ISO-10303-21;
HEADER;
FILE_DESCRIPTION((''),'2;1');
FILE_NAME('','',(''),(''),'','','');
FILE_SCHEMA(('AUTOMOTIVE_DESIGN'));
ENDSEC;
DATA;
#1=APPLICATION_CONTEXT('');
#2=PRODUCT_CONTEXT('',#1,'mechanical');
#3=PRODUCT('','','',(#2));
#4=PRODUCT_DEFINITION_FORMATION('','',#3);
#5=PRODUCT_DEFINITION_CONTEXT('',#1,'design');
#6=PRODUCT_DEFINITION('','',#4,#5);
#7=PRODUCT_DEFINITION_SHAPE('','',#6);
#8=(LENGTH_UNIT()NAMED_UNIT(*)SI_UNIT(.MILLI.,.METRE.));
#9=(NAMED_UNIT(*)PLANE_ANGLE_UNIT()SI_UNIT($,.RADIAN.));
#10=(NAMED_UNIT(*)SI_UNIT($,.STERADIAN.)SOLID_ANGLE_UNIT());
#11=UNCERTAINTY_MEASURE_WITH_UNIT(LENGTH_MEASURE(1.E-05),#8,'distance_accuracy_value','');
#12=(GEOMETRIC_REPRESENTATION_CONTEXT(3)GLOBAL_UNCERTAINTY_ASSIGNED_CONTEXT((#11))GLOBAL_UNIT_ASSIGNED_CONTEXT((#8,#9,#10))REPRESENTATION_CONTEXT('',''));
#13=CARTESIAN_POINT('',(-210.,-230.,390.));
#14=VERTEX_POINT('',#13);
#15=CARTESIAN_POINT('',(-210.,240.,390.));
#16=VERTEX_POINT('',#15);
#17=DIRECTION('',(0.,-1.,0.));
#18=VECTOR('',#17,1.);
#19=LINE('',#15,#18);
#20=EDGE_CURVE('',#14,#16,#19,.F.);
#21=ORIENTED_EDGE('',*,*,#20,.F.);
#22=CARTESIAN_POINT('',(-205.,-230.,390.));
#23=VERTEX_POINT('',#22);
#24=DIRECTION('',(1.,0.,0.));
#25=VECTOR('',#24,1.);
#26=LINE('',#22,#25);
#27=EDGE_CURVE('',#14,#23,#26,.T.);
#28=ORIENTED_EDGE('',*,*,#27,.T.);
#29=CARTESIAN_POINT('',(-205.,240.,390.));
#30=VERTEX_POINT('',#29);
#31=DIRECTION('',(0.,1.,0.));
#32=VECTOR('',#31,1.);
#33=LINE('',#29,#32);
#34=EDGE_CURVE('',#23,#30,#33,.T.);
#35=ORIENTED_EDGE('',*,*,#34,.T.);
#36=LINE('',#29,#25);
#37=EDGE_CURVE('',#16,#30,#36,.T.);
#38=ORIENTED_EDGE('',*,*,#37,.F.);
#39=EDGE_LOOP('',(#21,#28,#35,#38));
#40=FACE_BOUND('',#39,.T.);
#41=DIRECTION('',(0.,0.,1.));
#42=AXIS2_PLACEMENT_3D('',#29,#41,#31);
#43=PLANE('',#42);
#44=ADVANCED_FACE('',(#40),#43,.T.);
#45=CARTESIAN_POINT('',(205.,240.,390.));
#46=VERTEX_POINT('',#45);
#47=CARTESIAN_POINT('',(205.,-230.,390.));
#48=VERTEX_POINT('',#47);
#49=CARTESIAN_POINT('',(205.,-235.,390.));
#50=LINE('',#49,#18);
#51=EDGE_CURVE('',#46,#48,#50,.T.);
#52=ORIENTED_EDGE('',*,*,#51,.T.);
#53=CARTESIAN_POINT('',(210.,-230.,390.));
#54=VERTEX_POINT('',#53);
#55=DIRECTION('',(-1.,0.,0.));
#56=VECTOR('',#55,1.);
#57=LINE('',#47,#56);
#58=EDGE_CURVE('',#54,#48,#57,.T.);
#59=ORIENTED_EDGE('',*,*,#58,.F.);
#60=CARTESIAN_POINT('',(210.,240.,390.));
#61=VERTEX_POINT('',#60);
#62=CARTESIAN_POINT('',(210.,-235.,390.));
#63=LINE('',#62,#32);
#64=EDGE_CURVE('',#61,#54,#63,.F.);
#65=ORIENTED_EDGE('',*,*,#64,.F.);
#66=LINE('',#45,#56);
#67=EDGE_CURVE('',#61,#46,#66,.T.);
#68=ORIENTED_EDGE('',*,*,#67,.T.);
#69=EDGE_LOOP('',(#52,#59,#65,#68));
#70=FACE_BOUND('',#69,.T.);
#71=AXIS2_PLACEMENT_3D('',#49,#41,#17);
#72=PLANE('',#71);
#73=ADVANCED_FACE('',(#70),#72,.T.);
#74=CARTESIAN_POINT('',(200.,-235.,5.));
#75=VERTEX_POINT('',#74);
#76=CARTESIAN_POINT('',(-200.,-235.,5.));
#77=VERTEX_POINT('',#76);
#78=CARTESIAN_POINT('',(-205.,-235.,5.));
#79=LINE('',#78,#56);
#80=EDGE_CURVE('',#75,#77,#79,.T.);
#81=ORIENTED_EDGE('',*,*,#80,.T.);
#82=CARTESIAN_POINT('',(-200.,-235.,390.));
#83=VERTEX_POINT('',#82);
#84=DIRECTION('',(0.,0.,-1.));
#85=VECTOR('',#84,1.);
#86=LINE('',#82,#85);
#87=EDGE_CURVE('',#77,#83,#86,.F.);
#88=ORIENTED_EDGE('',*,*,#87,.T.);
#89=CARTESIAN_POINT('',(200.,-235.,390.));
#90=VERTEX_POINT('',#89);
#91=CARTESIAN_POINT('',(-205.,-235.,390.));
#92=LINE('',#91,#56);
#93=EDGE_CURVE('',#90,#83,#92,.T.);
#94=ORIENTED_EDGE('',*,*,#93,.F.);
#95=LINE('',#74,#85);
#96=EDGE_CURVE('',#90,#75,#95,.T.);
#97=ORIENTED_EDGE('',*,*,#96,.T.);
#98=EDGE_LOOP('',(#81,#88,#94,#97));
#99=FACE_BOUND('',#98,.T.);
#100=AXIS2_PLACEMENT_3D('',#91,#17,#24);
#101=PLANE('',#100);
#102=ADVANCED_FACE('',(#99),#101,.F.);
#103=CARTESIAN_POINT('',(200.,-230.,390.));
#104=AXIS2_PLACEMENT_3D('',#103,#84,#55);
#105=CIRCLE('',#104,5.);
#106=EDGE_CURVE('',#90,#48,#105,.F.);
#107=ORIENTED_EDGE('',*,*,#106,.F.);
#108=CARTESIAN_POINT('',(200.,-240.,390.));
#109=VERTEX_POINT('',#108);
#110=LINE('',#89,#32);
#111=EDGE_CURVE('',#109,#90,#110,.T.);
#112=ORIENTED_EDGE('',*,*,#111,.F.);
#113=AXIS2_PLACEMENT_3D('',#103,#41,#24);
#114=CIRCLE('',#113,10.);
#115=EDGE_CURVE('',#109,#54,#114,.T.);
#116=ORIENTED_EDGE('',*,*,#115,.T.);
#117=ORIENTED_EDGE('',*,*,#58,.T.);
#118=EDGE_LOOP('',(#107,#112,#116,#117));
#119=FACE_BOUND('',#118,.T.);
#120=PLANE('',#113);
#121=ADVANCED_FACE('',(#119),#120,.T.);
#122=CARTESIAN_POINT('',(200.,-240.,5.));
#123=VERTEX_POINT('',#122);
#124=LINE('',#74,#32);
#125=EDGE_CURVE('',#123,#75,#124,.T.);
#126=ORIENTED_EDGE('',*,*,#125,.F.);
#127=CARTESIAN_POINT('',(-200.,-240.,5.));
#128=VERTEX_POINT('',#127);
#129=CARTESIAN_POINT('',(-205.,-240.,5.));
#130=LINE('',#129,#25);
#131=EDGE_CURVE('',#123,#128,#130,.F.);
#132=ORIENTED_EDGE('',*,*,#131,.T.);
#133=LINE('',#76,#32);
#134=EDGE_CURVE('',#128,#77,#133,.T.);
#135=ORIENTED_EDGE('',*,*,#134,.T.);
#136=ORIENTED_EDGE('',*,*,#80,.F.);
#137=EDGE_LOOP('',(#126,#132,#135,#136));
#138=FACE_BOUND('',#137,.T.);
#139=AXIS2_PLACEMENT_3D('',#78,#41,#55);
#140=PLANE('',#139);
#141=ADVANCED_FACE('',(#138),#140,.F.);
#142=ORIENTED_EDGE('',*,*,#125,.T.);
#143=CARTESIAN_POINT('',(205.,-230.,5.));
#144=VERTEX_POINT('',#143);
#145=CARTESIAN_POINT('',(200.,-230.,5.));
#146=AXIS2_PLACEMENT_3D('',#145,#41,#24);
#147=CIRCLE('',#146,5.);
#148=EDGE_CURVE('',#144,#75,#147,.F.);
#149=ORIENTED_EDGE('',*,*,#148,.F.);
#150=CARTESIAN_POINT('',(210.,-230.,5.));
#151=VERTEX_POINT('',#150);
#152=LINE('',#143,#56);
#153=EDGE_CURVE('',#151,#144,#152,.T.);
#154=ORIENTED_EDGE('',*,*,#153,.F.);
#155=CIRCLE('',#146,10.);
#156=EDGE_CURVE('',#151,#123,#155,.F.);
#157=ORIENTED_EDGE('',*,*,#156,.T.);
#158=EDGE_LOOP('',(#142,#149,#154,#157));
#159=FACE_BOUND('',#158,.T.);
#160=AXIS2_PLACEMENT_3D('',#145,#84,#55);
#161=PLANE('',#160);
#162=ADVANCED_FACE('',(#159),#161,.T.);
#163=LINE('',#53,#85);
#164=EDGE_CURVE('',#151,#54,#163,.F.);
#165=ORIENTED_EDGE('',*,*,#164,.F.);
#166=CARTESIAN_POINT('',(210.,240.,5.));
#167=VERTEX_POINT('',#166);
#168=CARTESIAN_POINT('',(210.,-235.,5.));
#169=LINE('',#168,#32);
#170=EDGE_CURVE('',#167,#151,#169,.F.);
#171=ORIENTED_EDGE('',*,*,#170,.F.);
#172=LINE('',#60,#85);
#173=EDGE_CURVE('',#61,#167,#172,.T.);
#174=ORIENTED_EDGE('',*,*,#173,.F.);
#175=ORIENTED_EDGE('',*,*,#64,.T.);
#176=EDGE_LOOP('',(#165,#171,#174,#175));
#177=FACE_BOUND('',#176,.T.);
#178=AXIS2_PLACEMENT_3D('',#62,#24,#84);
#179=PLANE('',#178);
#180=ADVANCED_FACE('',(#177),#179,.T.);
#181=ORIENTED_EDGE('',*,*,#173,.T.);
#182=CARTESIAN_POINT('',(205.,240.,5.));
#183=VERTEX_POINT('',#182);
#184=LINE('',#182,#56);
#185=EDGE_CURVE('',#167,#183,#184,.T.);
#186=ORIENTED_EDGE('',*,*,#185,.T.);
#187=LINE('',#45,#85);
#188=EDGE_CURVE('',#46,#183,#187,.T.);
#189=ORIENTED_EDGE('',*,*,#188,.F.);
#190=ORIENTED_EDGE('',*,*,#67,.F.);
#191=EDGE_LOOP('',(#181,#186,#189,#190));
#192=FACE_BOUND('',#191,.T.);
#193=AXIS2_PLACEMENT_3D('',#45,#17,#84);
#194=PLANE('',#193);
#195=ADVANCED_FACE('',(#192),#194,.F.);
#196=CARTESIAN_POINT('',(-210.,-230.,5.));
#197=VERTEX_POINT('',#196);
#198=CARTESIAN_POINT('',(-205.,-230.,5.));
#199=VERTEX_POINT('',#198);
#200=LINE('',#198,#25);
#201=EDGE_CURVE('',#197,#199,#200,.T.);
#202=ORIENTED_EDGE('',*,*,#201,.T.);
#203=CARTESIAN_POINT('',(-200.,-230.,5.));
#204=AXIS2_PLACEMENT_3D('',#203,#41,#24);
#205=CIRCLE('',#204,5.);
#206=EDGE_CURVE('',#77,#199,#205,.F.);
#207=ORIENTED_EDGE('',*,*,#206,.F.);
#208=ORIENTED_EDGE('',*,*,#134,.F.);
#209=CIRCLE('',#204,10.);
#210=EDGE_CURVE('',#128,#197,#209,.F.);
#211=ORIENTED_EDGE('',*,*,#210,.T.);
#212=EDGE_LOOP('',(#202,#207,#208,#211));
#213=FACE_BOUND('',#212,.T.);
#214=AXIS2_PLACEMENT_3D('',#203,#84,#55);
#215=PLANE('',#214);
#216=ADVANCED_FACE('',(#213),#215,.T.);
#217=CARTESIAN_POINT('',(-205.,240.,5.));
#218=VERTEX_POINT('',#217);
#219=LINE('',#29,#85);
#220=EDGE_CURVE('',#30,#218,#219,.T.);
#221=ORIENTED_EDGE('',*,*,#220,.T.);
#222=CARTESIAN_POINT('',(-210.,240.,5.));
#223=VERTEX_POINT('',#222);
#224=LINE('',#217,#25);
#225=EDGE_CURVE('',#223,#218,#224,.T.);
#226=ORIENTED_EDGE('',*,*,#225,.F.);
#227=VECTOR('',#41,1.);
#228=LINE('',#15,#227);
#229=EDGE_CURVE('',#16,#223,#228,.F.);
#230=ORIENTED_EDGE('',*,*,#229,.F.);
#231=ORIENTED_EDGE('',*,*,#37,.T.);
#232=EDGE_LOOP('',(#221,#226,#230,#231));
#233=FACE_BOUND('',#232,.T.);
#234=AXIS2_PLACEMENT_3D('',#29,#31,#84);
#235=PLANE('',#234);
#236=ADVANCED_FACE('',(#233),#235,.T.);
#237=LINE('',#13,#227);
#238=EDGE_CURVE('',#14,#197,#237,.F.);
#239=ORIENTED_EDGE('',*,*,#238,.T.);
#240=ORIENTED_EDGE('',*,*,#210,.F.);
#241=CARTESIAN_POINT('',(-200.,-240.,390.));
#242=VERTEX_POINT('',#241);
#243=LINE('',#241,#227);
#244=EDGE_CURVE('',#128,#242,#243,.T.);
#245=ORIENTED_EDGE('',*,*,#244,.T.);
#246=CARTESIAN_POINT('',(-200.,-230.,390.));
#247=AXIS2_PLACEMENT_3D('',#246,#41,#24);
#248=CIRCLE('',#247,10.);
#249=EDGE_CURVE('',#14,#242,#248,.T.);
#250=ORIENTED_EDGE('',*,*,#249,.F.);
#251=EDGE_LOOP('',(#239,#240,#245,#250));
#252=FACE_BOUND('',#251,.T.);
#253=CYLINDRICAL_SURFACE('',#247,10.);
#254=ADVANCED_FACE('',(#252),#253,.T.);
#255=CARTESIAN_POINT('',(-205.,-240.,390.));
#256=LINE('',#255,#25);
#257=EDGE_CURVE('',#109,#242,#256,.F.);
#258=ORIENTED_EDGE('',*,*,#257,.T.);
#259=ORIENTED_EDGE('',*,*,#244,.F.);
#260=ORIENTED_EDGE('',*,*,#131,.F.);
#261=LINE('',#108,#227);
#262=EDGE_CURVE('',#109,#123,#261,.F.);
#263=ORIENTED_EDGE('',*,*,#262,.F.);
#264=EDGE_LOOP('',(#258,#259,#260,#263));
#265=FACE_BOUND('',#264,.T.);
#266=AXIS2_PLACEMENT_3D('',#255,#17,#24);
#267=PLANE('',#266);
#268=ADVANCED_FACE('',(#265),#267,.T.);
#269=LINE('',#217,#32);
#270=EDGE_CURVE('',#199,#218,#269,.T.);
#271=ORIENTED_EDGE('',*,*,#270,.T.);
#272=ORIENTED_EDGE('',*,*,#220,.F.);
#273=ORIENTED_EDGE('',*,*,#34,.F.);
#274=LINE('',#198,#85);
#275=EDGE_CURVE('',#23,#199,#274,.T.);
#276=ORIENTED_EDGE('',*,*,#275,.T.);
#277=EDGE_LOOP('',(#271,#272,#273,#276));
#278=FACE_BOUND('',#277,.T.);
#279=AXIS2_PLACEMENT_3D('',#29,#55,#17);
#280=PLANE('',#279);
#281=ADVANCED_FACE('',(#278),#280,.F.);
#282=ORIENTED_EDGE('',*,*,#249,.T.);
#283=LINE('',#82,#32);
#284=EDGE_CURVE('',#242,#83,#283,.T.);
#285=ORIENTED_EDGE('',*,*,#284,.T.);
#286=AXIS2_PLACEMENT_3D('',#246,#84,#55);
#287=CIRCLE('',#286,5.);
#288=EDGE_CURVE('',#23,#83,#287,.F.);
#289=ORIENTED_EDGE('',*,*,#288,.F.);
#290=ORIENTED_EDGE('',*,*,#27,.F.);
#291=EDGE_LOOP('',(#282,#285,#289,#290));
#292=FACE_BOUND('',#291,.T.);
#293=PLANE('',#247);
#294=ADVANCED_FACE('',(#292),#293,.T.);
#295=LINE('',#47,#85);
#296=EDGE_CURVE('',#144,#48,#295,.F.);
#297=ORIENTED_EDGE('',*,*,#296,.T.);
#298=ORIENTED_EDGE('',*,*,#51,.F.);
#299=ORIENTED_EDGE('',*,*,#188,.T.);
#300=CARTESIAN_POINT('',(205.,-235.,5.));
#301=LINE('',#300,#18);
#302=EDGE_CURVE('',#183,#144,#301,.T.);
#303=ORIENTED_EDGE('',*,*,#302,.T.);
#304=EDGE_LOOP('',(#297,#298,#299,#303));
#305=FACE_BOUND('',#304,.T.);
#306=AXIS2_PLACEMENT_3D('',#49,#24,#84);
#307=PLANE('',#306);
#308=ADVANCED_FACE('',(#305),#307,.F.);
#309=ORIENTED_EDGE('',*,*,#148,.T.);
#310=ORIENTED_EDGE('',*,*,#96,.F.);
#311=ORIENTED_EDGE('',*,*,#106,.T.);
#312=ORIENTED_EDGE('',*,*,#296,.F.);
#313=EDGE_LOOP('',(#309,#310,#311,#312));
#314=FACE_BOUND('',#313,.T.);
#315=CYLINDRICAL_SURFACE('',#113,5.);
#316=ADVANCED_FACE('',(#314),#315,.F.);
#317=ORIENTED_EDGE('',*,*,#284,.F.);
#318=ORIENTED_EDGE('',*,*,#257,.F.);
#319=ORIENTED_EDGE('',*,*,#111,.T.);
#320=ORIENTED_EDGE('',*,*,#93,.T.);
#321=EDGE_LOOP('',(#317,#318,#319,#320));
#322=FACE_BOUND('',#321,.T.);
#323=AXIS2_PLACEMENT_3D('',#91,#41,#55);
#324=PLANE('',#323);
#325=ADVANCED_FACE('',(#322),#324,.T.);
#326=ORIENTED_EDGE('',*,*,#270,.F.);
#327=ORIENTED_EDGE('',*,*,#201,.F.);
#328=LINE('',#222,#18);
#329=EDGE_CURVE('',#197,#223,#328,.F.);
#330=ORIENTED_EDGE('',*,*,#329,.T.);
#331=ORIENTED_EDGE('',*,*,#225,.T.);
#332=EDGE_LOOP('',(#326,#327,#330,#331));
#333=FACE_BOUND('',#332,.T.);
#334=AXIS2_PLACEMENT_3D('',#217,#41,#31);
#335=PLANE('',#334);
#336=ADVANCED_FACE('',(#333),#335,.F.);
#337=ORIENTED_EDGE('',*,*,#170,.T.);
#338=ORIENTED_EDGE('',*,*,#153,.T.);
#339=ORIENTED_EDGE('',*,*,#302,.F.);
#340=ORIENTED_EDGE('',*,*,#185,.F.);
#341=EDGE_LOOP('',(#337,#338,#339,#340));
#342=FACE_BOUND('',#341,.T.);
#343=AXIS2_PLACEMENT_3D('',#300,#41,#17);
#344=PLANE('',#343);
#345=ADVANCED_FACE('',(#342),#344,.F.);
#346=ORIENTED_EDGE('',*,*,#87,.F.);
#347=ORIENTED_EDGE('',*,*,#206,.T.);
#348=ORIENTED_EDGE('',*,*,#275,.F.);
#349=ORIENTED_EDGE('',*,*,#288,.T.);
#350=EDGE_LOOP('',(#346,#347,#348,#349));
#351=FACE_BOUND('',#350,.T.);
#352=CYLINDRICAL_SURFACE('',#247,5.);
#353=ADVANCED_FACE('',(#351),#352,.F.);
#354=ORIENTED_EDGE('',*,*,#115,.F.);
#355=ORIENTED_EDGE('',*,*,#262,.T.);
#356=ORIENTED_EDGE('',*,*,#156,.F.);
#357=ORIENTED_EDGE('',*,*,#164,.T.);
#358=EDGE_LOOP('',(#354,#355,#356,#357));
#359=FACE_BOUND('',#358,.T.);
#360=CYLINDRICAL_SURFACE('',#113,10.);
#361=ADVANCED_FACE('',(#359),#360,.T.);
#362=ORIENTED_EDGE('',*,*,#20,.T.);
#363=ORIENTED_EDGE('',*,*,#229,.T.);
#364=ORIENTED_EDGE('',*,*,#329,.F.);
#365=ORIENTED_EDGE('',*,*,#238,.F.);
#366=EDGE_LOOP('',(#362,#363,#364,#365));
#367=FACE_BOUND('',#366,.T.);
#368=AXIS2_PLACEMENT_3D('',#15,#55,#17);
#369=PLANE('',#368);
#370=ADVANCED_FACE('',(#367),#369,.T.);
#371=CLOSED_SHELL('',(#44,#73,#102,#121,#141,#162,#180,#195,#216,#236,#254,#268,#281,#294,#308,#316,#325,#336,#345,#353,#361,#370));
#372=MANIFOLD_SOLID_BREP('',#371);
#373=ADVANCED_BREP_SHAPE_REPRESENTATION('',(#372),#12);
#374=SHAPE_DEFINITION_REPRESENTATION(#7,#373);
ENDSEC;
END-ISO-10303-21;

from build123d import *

# Parameters (mm, degrees)
SKETCH_1_W            = 420
SKETCH_1_H            = 480
EXTRUDE_1_DEPTH       = 5
FILLET_1_R            = 5
EXTRUDE_START         = 385
EXTRUDE_3_DEPTH       = 385
CUT_EXTRUDE_START     = -5
CUT_EXTRUDE_2_DEPTH   = 5
SHEET_START           = 5
SHEET_METAL_1_DEPTH   = 385
SHEET_METAL_1_2_DEPTH = 385


# Read off the part's stored shape, not the designer's step: 转换实体1
with BuildPart() as part:
    # Sketch 1 → 凸台-拉伸1 (new body)
    with BuildSketch(Plane.XY):
        Rectangle(SKETCH_1_W, SKETCH_1_H)
    extrude(amount=EXTRUDE_1_DEPTH)

    # 圆角1
    fillet_1_edges = [part.edges().sort_by_distance(p)[0] for p in [
        (210, -240, 2.5),
        (-210, -240, 2.5),
    ]]
    fillet(fillet_1_edges, radius=FILLET_1_R)

    # 草图4 → 凸台-拉伸3 (add)
    with BuildSketch(Plane.XY.offset(5).offset(EXTRUDE_START)):
        with BuildLine():
            Line((-205, 240), (-205, -235))
            Line((-205, -235), (205, -235))
            Line((205, -235), (205, 240))
            Line((205, 240), (210, 240))
            Line((210, 240), (210, -235))
            ThreePointArc((210, -235), (208.535533906, -238.535533906), (205, -240))
            Line((205, -240), (-205, -240))
            ThreePointArc((-205, -240), (-208.535533906, -238.535533906), (-210, -235))
            Line((-210, -235), (-210, 240))
            Line((-210, 240), (-205, 240))
        make_face()
    extrude(amount=-EXTRUDE_3_DEPTH)

    # 草图5 → 切除-拉伸2 (cut)
    with BuildSketch(Plane(origin=(0, 0, 0), x_dir=(-1, 0, 0), z_dir=(0, 0, -1)).offset(CUT_EXTRUDE_START)):
        with BuildLine():
            Line((-205, -240), (205, -240))
            ThreePointArc((205, -240), (208.535533906, -238.535533906), (210, -235))
            Line((210, -235), (210, 240))
            Line((210, 240), (-210, 240))
            Line((-210, 240), (-210, -235))
            ThreePointArc((-210, -235), (-208.535533906, -238.535533906), (-205, -240))
        make_face()
    extrude(amount=CUT_EXTRUDE_2_DEPTH, mode=Mode.SUBTRACT)

    # Sheet Metal 1 outline → Sheet Metal 1 (cut)
    with BuildSketch(Plane.XY.offset(SHEET_START)):
        with BuildLine():
            Line((-205, -240), (-200, -240))
            ThreePointArc((-200, -240), (-207.071067812, -237.071067812), (-210, -230))
            Line((-210, -230), (-210, -235))
            ThreePointArc((-210, -235), (-208.535533906, -238.535533906), (-205, -240))
        make_face()
        with BuildLine():
            ThreePointArc((210, -230), (207.071067812, -237.071067812), (200, -240))
            Line((200, -240), (205, -240))
            ThreePointArc((205, -240), (208.535533906, -238.535533906), (210, -235))
            Line((210, -235), (210, -230))
        make_face()
    extrude(amount=SHEET_METAL_1_DEPTH, mode=Mode.SUBTRACT)

    # Sheet Metal 1 2 outline → Sheet Metal 1 2 (add)
    with BuildSketch(Plane.XY.offset(SHEET_START)):
        with BuildLine():
            Line((-205, -235), (-200, -235))
            ThreePointArc((-200, -235), (-203.535533906, -233.535533906), (-205, -230))
            Line((-205, -230), (-205, -235))
        make_face()
        with BuildLine():
            ThreePointArc((205, -230), (203.535533906, -233.535533906), (200, -235))
            Line((200, -235), (205, -235))
            Line((205, -235), (205, -230))
        make_face()
    extrude(amount=SHEET_METAL_1_2_DEPTH)


solid = part.part
